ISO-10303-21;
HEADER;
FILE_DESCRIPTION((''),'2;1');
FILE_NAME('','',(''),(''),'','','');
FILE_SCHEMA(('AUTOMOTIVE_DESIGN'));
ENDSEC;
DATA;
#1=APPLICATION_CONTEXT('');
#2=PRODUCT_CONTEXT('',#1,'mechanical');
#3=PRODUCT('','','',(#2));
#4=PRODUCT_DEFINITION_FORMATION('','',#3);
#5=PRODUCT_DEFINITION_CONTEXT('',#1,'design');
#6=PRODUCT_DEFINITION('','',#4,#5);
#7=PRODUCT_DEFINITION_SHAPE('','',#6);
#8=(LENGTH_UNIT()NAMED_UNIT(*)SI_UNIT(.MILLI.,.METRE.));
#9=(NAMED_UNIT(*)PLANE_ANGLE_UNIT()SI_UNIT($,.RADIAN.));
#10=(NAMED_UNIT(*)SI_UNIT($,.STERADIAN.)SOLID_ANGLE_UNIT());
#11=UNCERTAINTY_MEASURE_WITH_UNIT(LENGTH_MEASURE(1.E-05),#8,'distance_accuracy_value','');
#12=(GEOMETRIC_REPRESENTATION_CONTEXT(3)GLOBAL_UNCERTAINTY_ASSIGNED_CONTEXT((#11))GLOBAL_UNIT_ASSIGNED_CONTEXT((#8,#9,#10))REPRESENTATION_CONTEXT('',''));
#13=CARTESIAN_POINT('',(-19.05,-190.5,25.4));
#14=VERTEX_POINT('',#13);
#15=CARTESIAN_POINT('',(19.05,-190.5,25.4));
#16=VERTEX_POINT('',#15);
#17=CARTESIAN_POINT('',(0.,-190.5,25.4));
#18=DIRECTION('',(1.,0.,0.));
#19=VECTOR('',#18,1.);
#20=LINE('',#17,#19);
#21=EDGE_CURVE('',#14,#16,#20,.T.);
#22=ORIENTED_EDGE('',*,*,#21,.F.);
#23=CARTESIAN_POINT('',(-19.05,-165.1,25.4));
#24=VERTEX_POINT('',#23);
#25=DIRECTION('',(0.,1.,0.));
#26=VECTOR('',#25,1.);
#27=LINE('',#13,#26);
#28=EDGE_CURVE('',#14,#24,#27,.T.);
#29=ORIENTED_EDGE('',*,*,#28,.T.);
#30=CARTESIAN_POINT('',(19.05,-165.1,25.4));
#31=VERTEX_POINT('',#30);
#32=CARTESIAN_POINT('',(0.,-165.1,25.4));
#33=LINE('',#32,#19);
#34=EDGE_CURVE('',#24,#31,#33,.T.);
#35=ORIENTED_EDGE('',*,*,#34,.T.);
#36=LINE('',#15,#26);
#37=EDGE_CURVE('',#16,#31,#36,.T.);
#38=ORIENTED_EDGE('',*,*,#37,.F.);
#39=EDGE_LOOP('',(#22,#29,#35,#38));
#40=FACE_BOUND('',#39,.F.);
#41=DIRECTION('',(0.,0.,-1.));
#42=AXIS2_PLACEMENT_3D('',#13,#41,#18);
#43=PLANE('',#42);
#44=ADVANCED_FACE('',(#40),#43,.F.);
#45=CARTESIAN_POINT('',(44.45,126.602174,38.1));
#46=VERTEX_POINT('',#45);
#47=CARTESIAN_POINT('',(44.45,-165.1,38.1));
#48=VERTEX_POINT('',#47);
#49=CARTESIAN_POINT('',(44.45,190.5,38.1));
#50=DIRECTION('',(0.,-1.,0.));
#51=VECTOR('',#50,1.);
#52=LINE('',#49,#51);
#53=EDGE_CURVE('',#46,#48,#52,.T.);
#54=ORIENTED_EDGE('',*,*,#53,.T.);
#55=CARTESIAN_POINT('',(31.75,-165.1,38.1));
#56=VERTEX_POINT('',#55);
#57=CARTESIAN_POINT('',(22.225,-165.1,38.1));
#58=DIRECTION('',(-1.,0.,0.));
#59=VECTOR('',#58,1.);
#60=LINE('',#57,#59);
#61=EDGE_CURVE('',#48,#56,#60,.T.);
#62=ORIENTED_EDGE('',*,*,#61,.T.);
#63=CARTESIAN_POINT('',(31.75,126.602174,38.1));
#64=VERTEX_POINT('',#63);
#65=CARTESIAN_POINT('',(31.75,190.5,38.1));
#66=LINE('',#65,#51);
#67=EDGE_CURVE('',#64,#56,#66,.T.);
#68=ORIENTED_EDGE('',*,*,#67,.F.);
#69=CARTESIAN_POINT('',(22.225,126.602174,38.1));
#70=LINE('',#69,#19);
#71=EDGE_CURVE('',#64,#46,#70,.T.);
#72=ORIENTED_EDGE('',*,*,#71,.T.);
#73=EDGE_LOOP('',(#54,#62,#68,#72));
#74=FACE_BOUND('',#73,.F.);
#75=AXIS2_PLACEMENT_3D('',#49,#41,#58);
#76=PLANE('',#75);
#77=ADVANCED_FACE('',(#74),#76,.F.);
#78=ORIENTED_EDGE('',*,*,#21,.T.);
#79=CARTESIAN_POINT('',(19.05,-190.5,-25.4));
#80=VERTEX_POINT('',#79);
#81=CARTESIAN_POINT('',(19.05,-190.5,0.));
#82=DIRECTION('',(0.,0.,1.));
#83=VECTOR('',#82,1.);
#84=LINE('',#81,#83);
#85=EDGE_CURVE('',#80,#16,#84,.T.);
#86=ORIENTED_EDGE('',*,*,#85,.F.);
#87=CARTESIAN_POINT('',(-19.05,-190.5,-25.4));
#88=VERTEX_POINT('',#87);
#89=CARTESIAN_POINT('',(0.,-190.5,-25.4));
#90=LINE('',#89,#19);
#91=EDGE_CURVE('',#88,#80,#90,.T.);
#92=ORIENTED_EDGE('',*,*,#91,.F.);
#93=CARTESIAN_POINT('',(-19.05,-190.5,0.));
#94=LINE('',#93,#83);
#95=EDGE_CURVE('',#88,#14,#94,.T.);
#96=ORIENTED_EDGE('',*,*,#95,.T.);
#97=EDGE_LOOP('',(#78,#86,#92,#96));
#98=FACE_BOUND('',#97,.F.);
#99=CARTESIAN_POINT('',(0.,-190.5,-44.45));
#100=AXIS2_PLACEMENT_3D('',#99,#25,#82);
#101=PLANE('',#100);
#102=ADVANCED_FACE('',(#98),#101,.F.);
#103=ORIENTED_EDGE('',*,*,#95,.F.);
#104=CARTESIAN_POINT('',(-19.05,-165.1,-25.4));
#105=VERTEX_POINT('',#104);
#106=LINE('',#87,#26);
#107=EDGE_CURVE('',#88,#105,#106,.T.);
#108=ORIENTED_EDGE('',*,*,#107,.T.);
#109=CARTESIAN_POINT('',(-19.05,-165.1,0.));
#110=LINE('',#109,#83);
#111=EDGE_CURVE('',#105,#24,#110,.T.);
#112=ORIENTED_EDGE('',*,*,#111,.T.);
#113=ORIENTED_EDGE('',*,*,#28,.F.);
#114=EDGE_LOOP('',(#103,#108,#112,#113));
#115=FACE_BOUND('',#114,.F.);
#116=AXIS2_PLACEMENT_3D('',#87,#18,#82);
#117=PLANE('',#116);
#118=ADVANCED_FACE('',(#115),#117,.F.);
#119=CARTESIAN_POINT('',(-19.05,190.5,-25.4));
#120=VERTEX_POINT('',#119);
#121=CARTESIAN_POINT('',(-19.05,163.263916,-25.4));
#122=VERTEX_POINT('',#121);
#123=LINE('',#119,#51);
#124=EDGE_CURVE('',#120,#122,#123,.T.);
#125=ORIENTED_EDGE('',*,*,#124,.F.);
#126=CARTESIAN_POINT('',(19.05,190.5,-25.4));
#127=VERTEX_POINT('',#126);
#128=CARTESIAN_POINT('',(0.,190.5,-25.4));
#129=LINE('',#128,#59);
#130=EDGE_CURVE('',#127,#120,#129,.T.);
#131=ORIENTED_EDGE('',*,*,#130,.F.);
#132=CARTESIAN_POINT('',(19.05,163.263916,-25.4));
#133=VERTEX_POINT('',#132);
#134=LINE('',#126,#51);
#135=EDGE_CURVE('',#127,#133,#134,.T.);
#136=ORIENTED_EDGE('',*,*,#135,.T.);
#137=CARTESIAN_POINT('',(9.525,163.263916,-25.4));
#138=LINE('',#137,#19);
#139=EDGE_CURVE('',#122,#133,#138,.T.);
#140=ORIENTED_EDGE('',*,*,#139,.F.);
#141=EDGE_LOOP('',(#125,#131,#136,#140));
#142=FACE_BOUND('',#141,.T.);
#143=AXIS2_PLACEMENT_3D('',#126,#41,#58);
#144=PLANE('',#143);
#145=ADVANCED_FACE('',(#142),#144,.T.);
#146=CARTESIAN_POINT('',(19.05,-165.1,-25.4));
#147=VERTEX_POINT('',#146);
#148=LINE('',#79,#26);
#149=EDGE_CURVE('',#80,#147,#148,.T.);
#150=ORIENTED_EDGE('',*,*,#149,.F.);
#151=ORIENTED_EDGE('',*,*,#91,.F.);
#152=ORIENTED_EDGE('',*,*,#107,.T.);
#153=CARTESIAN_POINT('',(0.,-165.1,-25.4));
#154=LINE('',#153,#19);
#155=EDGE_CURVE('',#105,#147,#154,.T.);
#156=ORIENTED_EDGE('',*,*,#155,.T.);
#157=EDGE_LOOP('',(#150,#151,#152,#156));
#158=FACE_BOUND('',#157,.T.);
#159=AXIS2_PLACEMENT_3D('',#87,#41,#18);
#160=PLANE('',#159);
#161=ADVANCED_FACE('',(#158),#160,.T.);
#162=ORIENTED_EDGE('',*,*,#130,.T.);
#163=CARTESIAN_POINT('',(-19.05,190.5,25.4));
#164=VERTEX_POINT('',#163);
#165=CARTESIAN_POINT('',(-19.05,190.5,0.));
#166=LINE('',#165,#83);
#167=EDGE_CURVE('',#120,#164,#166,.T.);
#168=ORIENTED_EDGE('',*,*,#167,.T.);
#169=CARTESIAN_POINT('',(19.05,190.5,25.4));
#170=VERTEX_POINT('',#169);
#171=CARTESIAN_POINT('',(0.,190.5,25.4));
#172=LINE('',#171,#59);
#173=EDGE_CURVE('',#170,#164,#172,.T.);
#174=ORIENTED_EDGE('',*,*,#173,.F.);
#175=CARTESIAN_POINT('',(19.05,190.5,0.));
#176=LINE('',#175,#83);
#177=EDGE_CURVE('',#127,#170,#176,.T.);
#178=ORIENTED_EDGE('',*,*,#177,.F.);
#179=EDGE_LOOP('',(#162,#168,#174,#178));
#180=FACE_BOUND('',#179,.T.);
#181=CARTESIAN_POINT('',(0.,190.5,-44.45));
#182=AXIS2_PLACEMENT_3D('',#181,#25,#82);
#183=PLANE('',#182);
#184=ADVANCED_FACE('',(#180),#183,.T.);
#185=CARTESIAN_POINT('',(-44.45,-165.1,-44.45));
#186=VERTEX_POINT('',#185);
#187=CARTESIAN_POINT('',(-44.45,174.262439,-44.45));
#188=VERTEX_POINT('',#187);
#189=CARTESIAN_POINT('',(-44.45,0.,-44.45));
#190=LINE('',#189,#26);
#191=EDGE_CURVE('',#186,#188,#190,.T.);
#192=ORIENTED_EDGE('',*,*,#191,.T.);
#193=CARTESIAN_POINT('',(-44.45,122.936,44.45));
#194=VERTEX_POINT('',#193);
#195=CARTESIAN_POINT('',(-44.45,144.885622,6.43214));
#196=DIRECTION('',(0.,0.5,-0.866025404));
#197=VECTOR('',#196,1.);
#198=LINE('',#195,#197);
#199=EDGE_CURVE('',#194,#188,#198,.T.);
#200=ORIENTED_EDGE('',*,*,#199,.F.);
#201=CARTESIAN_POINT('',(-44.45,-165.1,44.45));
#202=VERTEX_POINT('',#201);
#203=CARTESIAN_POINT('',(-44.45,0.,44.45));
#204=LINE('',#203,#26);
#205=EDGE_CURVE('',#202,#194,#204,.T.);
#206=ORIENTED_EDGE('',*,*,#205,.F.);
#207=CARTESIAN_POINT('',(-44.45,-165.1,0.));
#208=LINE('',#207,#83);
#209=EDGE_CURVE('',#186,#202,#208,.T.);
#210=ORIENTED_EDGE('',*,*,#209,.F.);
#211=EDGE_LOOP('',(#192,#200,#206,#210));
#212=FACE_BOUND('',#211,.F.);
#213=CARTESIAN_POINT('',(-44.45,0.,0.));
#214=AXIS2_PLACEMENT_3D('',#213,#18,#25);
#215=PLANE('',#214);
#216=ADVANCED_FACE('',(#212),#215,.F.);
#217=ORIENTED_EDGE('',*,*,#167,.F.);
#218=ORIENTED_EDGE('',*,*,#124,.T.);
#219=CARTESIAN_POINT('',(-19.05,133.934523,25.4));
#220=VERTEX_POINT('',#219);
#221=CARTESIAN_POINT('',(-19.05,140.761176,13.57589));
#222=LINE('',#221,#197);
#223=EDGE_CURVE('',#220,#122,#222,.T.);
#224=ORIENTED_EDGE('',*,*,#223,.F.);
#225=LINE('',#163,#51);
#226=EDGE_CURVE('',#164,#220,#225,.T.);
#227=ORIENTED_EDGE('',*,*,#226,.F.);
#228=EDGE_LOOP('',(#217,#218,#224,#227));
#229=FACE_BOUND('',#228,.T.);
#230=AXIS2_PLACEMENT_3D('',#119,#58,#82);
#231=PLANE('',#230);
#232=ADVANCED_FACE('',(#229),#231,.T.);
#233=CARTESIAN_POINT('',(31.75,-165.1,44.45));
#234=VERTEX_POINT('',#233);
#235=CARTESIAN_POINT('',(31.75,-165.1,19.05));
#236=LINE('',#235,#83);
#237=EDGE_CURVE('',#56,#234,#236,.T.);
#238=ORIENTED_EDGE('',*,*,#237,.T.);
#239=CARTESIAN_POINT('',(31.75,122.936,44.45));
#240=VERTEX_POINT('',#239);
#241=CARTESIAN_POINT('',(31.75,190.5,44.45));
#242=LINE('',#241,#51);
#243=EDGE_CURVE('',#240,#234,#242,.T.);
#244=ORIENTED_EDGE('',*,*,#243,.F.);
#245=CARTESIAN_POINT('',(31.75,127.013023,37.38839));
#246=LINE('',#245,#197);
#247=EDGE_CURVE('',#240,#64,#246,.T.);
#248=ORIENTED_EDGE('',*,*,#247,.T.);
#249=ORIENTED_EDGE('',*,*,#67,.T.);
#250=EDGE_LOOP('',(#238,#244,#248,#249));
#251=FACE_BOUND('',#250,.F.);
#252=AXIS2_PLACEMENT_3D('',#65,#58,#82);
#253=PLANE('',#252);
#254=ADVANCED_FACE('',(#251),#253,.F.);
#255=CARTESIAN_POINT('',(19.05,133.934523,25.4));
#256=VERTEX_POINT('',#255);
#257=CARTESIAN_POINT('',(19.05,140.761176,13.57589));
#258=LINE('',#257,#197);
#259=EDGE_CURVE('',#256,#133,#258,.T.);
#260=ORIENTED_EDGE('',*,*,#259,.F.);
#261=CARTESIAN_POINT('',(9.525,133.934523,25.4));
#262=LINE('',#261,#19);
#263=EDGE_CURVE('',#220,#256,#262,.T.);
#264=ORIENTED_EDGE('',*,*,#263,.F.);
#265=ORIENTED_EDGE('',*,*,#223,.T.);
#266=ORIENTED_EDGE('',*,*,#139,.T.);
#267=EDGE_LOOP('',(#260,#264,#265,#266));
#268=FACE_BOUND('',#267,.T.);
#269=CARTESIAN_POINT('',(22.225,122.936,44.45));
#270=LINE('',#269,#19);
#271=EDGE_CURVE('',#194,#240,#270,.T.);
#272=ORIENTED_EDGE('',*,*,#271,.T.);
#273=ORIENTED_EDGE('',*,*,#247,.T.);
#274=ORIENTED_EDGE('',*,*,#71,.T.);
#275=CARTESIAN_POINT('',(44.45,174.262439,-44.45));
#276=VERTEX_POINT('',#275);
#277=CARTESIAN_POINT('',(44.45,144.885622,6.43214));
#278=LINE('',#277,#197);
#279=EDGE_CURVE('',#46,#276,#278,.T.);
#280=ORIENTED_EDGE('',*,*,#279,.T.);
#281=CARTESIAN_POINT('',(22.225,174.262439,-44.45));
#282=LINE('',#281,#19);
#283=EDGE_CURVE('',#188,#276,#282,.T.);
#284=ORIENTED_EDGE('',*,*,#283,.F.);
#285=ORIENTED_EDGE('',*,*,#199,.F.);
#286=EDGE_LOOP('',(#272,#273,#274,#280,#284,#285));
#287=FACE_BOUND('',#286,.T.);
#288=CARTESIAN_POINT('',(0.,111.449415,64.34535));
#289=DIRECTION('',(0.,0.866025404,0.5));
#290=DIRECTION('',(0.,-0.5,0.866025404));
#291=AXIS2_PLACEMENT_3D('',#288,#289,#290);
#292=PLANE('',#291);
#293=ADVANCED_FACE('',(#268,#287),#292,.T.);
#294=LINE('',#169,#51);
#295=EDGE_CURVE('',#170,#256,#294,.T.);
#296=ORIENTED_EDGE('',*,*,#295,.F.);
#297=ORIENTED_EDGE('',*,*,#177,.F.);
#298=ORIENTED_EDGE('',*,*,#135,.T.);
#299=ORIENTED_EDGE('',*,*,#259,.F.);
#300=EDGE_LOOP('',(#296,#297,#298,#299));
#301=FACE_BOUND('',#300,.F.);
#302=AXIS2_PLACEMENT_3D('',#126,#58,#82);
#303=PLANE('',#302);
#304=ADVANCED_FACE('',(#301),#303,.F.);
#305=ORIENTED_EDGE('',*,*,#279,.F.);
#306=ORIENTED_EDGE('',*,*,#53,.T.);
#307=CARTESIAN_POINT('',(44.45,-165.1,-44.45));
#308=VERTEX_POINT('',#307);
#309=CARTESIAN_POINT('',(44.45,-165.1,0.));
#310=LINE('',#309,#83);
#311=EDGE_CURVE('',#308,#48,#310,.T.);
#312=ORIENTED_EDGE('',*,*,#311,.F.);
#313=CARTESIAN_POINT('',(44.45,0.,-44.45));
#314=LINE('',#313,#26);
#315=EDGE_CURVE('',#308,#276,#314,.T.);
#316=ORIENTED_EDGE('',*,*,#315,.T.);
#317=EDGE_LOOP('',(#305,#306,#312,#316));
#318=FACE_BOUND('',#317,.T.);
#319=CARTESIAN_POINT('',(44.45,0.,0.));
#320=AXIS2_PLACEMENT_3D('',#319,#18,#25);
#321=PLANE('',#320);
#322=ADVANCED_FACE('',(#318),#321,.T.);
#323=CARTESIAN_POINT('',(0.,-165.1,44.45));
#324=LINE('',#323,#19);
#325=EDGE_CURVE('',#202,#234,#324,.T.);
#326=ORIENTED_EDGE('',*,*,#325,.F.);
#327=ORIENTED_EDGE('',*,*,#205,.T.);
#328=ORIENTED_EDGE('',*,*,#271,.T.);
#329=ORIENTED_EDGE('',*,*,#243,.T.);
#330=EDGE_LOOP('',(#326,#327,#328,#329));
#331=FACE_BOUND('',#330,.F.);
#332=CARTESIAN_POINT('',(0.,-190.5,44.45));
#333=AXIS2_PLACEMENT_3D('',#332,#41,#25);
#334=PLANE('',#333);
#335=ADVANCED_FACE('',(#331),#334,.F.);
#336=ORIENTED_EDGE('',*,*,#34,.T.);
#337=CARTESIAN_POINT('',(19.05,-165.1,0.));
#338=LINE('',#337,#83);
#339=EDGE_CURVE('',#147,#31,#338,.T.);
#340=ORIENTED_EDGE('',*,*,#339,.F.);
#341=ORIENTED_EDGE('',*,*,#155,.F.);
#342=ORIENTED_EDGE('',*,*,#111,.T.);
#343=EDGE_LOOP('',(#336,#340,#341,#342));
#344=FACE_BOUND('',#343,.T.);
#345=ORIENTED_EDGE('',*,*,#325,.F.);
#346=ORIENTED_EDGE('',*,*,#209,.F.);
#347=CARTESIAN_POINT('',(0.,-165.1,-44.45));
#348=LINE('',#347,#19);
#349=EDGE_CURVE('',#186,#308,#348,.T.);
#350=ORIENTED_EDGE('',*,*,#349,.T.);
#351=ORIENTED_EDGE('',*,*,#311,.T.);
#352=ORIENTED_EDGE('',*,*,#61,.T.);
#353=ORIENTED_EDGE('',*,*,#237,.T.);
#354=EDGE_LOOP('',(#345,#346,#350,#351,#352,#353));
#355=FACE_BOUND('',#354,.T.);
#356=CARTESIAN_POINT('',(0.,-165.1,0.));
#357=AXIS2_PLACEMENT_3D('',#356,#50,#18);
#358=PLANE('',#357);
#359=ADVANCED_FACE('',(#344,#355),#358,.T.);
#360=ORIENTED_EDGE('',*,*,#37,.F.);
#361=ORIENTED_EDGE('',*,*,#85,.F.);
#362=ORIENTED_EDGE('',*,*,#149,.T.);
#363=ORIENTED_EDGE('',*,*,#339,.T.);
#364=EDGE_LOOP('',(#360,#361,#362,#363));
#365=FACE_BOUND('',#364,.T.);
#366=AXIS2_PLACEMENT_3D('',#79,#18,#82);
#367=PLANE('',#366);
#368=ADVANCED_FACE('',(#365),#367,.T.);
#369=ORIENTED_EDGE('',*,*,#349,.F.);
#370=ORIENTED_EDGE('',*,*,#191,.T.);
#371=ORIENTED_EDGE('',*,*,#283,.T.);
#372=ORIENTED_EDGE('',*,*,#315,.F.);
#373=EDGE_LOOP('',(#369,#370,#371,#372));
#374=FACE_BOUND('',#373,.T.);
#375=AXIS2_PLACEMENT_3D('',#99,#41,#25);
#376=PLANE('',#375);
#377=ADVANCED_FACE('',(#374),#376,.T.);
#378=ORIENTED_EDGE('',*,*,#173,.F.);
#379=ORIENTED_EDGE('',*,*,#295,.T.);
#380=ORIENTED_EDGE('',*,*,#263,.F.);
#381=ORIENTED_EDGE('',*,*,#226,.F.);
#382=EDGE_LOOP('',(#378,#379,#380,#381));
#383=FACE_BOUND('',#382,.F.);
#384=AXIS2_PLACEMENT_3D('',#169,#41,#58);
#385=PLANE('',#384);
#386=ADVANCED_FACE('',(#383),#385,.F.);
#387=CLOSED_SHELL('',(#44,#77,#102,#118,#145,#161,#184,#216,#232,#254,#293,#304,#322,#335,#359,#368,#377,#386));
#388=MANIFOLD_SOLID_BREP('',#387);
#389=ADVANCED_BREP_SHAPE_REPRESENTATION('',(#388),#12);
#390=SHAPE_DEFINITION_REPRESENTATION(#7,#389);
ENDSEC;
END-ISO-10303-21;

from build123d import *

# Parameters (mm, degrees)
F0_W     = 381
F0_H     = 88.9
F1_DEPTH = 44.45
F4_W     = 12.7
F4_H     = 6.35
F5_DEPTH = 381.001
F6_W     = 88.9
F6_H     = 88.9
F6_W_2   = 38.1
F6_H_2   = 50.8
F7_REACH = 193.287585695
F8_W     = 88.9
F8_H     = 88.9
F8_W_2   = 38.1
F8_H_2   = 50.8
F9_DEPTH = 25.4


with BuildPart() as f1:
    # F0 (on Right) → F1 (new body, symmetric)
    with BuildSketch(Plane.YZ):
        Rectangle(F0_W, F0_H)
    extrude(amount=F1_DEPTH, both=True)

    # F4 (on face) → F5 (cut, through all)
    with BuildSketch(Plane(origin=(0, 190.5, 0), x_dir=(-1, 0, 0), z_dir=(0, 1, 0))):
        with Locations((-38.1, 41.275)):
            Rectangle(F4_W, F4_H)
    extrude(amount=-F5_DEPTH, mode=Mode.SUBTRACT)

    f7_end = Plane(origin=(0, 111.4494145991, 64.3453495198), x_dir=(0, -0.5, 0.8660254038), z_dir=(0, 0.8660254038, 0.5))
    # F6 (on face) → F7 (cut, up to a plane its end follows)
    with BuildSketch(Plane(origin=(0, 190.5, 0), x_dir=(-1, 0, 0), z_dir=(0, 1, 0))):
        Rectangle(F6_W, F6_H)
        Rectangle(F6_W_2, F6_H_2, mode=Mode.SUBTRACT)
    f7_long = extrude(amount=-F7_REACH, mode=Mode.PRIVATE)
    add(split(f7_long, bisect_by=f7_end, keep=Keep.TOP, mode=Mode.PRIVATE), mode=Mode.SUBTRACT)

    # F8 (on face) → F9 (cut)
    with BuildSketch(Plane.XZ.offset(190.5)):
        Rectangle(F8_W, F8_H)
        Rectangle(F8_W_2, F8_H_2, mode=Mode.SUBTRACT)
    extrude(amount=-F9_DEPTH, mode=Mode.SUBTRACT)


solid = f1.part
